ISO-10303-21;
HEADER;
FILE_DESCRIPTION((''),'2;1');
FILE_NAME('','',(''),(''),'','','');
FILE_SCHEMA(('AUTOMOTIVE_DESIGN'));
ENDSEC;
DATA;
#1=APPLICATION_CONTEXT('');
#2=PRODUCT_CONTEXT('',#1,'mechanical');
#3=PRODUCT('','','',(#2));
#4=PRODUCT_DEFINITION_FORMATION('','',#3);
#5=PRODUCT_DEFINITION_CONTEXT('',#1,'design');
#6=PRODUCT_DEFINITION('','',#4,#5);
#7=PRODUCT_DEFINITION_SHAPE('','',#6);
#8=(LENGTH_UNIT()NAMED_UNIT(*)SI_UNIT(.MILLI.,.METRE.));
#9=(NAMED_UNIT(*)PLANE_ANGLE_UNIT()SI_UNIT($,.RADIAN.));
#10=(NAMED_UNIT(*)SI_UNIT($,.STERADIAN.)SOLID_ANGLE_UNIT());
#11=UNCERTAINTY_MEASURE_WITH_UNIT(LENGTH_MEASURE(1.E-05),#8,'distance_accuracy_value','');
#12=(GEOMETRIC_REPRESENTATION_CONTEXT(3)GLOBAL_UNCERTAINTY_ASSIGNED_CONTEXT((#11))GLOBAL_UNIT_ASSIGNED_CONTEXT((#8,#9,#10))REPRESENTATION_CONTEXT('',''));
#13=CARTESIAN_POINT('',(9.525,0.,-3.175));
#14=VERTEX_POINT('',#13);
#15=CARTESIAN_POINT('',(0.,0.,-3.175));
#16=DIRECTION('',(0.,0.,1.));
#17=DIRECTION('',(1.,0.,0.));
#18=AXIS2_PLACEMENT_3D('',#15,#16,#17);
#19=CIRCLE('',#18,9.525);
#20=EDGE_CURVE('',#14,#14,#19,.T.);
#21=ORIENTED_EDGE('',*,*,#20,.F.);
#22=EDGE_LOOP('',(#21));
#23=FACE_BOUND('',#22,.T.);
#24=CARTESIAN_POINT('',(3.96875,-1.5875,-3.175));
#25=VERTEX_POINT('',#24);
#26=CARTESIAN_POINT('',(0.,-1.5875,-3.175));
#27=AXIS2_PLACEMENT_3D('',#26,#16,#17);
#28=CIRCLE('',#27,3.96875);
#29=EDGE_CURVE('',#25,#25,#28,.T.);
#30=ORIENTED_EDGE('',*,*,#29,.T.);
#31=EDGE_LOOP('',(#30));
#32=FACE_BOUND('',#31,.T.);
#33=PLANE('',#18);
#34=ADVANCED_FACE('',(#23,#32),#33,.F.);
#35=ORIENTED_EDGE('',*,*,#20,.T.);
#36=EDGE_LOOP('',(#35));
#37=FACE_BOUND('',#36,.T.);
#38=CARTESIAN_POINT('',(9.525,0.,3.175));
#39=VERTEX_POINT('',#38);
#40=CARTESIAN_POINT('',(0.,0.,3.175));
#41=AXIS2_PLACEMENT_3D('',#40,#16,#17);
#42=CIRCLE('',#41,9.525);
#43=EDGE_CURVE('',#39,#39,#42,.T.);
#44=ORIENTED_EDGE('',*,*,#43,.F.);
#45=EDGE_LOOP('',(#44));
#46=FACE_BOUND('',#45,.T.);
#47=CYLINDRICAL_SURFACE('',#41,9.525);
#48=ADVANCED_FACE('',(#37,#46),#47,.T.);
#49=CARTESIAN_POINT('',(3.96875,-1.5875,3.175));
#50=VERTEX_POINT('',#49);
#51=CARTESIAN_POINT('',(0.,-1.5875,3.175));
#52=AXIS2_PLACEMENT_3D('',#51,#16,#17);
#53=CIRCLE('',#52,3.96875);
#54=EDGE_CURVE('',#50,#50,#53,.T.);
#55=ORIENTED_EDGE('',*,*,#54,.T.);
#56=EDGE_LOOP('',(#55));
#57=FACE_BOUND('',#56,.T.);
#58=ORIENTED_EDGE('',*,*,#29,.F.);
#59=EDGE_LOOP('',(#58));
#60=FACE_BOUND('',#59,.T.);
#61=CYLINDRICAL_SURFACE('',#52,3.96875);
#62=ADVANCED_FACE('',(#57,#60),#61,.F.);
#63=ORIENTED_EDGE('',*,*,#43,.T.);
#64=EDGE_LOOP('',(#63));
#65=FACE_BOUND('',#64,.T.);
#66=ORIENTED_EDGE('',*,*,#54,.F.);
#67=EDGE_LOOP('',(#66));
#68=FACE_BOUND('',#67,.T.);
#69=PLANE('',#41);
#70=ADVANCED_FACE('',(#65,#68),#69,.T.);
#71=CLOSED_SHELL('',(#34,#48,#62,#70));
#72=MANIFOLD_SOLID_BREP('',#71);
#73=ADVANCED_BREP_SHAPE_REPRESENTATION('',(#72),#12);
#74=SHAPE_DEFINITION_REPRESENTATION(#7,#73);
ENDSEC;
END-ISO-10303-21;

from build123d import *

# Parameters (mm, degrees)
SKETCH1_R                      = 9.525
EXTRUDE1_DEPTH                 = 3.175
F_5_16_0_3125_DIAMETER_HOLE1_D = 7.9375


with BuildPart() as part:
    # Sketch1 → Extrude1 (new, symmetric)
    with BuildSketch(Plane.XY):
        Circle(SKETCH1_R)
    extrude(amount=EXTRUDE1_DEPTH, both=True)

    # 5/16 (0.3125) Diameter Hole1 (through all)
    with Locations(Plane.XY.offset(3.175)):
        with Locations((0, -1.5875)):
            Hole(F_5_16_0_3125_DIAMETER_HOLE1_D / 2)


solid = part.part
